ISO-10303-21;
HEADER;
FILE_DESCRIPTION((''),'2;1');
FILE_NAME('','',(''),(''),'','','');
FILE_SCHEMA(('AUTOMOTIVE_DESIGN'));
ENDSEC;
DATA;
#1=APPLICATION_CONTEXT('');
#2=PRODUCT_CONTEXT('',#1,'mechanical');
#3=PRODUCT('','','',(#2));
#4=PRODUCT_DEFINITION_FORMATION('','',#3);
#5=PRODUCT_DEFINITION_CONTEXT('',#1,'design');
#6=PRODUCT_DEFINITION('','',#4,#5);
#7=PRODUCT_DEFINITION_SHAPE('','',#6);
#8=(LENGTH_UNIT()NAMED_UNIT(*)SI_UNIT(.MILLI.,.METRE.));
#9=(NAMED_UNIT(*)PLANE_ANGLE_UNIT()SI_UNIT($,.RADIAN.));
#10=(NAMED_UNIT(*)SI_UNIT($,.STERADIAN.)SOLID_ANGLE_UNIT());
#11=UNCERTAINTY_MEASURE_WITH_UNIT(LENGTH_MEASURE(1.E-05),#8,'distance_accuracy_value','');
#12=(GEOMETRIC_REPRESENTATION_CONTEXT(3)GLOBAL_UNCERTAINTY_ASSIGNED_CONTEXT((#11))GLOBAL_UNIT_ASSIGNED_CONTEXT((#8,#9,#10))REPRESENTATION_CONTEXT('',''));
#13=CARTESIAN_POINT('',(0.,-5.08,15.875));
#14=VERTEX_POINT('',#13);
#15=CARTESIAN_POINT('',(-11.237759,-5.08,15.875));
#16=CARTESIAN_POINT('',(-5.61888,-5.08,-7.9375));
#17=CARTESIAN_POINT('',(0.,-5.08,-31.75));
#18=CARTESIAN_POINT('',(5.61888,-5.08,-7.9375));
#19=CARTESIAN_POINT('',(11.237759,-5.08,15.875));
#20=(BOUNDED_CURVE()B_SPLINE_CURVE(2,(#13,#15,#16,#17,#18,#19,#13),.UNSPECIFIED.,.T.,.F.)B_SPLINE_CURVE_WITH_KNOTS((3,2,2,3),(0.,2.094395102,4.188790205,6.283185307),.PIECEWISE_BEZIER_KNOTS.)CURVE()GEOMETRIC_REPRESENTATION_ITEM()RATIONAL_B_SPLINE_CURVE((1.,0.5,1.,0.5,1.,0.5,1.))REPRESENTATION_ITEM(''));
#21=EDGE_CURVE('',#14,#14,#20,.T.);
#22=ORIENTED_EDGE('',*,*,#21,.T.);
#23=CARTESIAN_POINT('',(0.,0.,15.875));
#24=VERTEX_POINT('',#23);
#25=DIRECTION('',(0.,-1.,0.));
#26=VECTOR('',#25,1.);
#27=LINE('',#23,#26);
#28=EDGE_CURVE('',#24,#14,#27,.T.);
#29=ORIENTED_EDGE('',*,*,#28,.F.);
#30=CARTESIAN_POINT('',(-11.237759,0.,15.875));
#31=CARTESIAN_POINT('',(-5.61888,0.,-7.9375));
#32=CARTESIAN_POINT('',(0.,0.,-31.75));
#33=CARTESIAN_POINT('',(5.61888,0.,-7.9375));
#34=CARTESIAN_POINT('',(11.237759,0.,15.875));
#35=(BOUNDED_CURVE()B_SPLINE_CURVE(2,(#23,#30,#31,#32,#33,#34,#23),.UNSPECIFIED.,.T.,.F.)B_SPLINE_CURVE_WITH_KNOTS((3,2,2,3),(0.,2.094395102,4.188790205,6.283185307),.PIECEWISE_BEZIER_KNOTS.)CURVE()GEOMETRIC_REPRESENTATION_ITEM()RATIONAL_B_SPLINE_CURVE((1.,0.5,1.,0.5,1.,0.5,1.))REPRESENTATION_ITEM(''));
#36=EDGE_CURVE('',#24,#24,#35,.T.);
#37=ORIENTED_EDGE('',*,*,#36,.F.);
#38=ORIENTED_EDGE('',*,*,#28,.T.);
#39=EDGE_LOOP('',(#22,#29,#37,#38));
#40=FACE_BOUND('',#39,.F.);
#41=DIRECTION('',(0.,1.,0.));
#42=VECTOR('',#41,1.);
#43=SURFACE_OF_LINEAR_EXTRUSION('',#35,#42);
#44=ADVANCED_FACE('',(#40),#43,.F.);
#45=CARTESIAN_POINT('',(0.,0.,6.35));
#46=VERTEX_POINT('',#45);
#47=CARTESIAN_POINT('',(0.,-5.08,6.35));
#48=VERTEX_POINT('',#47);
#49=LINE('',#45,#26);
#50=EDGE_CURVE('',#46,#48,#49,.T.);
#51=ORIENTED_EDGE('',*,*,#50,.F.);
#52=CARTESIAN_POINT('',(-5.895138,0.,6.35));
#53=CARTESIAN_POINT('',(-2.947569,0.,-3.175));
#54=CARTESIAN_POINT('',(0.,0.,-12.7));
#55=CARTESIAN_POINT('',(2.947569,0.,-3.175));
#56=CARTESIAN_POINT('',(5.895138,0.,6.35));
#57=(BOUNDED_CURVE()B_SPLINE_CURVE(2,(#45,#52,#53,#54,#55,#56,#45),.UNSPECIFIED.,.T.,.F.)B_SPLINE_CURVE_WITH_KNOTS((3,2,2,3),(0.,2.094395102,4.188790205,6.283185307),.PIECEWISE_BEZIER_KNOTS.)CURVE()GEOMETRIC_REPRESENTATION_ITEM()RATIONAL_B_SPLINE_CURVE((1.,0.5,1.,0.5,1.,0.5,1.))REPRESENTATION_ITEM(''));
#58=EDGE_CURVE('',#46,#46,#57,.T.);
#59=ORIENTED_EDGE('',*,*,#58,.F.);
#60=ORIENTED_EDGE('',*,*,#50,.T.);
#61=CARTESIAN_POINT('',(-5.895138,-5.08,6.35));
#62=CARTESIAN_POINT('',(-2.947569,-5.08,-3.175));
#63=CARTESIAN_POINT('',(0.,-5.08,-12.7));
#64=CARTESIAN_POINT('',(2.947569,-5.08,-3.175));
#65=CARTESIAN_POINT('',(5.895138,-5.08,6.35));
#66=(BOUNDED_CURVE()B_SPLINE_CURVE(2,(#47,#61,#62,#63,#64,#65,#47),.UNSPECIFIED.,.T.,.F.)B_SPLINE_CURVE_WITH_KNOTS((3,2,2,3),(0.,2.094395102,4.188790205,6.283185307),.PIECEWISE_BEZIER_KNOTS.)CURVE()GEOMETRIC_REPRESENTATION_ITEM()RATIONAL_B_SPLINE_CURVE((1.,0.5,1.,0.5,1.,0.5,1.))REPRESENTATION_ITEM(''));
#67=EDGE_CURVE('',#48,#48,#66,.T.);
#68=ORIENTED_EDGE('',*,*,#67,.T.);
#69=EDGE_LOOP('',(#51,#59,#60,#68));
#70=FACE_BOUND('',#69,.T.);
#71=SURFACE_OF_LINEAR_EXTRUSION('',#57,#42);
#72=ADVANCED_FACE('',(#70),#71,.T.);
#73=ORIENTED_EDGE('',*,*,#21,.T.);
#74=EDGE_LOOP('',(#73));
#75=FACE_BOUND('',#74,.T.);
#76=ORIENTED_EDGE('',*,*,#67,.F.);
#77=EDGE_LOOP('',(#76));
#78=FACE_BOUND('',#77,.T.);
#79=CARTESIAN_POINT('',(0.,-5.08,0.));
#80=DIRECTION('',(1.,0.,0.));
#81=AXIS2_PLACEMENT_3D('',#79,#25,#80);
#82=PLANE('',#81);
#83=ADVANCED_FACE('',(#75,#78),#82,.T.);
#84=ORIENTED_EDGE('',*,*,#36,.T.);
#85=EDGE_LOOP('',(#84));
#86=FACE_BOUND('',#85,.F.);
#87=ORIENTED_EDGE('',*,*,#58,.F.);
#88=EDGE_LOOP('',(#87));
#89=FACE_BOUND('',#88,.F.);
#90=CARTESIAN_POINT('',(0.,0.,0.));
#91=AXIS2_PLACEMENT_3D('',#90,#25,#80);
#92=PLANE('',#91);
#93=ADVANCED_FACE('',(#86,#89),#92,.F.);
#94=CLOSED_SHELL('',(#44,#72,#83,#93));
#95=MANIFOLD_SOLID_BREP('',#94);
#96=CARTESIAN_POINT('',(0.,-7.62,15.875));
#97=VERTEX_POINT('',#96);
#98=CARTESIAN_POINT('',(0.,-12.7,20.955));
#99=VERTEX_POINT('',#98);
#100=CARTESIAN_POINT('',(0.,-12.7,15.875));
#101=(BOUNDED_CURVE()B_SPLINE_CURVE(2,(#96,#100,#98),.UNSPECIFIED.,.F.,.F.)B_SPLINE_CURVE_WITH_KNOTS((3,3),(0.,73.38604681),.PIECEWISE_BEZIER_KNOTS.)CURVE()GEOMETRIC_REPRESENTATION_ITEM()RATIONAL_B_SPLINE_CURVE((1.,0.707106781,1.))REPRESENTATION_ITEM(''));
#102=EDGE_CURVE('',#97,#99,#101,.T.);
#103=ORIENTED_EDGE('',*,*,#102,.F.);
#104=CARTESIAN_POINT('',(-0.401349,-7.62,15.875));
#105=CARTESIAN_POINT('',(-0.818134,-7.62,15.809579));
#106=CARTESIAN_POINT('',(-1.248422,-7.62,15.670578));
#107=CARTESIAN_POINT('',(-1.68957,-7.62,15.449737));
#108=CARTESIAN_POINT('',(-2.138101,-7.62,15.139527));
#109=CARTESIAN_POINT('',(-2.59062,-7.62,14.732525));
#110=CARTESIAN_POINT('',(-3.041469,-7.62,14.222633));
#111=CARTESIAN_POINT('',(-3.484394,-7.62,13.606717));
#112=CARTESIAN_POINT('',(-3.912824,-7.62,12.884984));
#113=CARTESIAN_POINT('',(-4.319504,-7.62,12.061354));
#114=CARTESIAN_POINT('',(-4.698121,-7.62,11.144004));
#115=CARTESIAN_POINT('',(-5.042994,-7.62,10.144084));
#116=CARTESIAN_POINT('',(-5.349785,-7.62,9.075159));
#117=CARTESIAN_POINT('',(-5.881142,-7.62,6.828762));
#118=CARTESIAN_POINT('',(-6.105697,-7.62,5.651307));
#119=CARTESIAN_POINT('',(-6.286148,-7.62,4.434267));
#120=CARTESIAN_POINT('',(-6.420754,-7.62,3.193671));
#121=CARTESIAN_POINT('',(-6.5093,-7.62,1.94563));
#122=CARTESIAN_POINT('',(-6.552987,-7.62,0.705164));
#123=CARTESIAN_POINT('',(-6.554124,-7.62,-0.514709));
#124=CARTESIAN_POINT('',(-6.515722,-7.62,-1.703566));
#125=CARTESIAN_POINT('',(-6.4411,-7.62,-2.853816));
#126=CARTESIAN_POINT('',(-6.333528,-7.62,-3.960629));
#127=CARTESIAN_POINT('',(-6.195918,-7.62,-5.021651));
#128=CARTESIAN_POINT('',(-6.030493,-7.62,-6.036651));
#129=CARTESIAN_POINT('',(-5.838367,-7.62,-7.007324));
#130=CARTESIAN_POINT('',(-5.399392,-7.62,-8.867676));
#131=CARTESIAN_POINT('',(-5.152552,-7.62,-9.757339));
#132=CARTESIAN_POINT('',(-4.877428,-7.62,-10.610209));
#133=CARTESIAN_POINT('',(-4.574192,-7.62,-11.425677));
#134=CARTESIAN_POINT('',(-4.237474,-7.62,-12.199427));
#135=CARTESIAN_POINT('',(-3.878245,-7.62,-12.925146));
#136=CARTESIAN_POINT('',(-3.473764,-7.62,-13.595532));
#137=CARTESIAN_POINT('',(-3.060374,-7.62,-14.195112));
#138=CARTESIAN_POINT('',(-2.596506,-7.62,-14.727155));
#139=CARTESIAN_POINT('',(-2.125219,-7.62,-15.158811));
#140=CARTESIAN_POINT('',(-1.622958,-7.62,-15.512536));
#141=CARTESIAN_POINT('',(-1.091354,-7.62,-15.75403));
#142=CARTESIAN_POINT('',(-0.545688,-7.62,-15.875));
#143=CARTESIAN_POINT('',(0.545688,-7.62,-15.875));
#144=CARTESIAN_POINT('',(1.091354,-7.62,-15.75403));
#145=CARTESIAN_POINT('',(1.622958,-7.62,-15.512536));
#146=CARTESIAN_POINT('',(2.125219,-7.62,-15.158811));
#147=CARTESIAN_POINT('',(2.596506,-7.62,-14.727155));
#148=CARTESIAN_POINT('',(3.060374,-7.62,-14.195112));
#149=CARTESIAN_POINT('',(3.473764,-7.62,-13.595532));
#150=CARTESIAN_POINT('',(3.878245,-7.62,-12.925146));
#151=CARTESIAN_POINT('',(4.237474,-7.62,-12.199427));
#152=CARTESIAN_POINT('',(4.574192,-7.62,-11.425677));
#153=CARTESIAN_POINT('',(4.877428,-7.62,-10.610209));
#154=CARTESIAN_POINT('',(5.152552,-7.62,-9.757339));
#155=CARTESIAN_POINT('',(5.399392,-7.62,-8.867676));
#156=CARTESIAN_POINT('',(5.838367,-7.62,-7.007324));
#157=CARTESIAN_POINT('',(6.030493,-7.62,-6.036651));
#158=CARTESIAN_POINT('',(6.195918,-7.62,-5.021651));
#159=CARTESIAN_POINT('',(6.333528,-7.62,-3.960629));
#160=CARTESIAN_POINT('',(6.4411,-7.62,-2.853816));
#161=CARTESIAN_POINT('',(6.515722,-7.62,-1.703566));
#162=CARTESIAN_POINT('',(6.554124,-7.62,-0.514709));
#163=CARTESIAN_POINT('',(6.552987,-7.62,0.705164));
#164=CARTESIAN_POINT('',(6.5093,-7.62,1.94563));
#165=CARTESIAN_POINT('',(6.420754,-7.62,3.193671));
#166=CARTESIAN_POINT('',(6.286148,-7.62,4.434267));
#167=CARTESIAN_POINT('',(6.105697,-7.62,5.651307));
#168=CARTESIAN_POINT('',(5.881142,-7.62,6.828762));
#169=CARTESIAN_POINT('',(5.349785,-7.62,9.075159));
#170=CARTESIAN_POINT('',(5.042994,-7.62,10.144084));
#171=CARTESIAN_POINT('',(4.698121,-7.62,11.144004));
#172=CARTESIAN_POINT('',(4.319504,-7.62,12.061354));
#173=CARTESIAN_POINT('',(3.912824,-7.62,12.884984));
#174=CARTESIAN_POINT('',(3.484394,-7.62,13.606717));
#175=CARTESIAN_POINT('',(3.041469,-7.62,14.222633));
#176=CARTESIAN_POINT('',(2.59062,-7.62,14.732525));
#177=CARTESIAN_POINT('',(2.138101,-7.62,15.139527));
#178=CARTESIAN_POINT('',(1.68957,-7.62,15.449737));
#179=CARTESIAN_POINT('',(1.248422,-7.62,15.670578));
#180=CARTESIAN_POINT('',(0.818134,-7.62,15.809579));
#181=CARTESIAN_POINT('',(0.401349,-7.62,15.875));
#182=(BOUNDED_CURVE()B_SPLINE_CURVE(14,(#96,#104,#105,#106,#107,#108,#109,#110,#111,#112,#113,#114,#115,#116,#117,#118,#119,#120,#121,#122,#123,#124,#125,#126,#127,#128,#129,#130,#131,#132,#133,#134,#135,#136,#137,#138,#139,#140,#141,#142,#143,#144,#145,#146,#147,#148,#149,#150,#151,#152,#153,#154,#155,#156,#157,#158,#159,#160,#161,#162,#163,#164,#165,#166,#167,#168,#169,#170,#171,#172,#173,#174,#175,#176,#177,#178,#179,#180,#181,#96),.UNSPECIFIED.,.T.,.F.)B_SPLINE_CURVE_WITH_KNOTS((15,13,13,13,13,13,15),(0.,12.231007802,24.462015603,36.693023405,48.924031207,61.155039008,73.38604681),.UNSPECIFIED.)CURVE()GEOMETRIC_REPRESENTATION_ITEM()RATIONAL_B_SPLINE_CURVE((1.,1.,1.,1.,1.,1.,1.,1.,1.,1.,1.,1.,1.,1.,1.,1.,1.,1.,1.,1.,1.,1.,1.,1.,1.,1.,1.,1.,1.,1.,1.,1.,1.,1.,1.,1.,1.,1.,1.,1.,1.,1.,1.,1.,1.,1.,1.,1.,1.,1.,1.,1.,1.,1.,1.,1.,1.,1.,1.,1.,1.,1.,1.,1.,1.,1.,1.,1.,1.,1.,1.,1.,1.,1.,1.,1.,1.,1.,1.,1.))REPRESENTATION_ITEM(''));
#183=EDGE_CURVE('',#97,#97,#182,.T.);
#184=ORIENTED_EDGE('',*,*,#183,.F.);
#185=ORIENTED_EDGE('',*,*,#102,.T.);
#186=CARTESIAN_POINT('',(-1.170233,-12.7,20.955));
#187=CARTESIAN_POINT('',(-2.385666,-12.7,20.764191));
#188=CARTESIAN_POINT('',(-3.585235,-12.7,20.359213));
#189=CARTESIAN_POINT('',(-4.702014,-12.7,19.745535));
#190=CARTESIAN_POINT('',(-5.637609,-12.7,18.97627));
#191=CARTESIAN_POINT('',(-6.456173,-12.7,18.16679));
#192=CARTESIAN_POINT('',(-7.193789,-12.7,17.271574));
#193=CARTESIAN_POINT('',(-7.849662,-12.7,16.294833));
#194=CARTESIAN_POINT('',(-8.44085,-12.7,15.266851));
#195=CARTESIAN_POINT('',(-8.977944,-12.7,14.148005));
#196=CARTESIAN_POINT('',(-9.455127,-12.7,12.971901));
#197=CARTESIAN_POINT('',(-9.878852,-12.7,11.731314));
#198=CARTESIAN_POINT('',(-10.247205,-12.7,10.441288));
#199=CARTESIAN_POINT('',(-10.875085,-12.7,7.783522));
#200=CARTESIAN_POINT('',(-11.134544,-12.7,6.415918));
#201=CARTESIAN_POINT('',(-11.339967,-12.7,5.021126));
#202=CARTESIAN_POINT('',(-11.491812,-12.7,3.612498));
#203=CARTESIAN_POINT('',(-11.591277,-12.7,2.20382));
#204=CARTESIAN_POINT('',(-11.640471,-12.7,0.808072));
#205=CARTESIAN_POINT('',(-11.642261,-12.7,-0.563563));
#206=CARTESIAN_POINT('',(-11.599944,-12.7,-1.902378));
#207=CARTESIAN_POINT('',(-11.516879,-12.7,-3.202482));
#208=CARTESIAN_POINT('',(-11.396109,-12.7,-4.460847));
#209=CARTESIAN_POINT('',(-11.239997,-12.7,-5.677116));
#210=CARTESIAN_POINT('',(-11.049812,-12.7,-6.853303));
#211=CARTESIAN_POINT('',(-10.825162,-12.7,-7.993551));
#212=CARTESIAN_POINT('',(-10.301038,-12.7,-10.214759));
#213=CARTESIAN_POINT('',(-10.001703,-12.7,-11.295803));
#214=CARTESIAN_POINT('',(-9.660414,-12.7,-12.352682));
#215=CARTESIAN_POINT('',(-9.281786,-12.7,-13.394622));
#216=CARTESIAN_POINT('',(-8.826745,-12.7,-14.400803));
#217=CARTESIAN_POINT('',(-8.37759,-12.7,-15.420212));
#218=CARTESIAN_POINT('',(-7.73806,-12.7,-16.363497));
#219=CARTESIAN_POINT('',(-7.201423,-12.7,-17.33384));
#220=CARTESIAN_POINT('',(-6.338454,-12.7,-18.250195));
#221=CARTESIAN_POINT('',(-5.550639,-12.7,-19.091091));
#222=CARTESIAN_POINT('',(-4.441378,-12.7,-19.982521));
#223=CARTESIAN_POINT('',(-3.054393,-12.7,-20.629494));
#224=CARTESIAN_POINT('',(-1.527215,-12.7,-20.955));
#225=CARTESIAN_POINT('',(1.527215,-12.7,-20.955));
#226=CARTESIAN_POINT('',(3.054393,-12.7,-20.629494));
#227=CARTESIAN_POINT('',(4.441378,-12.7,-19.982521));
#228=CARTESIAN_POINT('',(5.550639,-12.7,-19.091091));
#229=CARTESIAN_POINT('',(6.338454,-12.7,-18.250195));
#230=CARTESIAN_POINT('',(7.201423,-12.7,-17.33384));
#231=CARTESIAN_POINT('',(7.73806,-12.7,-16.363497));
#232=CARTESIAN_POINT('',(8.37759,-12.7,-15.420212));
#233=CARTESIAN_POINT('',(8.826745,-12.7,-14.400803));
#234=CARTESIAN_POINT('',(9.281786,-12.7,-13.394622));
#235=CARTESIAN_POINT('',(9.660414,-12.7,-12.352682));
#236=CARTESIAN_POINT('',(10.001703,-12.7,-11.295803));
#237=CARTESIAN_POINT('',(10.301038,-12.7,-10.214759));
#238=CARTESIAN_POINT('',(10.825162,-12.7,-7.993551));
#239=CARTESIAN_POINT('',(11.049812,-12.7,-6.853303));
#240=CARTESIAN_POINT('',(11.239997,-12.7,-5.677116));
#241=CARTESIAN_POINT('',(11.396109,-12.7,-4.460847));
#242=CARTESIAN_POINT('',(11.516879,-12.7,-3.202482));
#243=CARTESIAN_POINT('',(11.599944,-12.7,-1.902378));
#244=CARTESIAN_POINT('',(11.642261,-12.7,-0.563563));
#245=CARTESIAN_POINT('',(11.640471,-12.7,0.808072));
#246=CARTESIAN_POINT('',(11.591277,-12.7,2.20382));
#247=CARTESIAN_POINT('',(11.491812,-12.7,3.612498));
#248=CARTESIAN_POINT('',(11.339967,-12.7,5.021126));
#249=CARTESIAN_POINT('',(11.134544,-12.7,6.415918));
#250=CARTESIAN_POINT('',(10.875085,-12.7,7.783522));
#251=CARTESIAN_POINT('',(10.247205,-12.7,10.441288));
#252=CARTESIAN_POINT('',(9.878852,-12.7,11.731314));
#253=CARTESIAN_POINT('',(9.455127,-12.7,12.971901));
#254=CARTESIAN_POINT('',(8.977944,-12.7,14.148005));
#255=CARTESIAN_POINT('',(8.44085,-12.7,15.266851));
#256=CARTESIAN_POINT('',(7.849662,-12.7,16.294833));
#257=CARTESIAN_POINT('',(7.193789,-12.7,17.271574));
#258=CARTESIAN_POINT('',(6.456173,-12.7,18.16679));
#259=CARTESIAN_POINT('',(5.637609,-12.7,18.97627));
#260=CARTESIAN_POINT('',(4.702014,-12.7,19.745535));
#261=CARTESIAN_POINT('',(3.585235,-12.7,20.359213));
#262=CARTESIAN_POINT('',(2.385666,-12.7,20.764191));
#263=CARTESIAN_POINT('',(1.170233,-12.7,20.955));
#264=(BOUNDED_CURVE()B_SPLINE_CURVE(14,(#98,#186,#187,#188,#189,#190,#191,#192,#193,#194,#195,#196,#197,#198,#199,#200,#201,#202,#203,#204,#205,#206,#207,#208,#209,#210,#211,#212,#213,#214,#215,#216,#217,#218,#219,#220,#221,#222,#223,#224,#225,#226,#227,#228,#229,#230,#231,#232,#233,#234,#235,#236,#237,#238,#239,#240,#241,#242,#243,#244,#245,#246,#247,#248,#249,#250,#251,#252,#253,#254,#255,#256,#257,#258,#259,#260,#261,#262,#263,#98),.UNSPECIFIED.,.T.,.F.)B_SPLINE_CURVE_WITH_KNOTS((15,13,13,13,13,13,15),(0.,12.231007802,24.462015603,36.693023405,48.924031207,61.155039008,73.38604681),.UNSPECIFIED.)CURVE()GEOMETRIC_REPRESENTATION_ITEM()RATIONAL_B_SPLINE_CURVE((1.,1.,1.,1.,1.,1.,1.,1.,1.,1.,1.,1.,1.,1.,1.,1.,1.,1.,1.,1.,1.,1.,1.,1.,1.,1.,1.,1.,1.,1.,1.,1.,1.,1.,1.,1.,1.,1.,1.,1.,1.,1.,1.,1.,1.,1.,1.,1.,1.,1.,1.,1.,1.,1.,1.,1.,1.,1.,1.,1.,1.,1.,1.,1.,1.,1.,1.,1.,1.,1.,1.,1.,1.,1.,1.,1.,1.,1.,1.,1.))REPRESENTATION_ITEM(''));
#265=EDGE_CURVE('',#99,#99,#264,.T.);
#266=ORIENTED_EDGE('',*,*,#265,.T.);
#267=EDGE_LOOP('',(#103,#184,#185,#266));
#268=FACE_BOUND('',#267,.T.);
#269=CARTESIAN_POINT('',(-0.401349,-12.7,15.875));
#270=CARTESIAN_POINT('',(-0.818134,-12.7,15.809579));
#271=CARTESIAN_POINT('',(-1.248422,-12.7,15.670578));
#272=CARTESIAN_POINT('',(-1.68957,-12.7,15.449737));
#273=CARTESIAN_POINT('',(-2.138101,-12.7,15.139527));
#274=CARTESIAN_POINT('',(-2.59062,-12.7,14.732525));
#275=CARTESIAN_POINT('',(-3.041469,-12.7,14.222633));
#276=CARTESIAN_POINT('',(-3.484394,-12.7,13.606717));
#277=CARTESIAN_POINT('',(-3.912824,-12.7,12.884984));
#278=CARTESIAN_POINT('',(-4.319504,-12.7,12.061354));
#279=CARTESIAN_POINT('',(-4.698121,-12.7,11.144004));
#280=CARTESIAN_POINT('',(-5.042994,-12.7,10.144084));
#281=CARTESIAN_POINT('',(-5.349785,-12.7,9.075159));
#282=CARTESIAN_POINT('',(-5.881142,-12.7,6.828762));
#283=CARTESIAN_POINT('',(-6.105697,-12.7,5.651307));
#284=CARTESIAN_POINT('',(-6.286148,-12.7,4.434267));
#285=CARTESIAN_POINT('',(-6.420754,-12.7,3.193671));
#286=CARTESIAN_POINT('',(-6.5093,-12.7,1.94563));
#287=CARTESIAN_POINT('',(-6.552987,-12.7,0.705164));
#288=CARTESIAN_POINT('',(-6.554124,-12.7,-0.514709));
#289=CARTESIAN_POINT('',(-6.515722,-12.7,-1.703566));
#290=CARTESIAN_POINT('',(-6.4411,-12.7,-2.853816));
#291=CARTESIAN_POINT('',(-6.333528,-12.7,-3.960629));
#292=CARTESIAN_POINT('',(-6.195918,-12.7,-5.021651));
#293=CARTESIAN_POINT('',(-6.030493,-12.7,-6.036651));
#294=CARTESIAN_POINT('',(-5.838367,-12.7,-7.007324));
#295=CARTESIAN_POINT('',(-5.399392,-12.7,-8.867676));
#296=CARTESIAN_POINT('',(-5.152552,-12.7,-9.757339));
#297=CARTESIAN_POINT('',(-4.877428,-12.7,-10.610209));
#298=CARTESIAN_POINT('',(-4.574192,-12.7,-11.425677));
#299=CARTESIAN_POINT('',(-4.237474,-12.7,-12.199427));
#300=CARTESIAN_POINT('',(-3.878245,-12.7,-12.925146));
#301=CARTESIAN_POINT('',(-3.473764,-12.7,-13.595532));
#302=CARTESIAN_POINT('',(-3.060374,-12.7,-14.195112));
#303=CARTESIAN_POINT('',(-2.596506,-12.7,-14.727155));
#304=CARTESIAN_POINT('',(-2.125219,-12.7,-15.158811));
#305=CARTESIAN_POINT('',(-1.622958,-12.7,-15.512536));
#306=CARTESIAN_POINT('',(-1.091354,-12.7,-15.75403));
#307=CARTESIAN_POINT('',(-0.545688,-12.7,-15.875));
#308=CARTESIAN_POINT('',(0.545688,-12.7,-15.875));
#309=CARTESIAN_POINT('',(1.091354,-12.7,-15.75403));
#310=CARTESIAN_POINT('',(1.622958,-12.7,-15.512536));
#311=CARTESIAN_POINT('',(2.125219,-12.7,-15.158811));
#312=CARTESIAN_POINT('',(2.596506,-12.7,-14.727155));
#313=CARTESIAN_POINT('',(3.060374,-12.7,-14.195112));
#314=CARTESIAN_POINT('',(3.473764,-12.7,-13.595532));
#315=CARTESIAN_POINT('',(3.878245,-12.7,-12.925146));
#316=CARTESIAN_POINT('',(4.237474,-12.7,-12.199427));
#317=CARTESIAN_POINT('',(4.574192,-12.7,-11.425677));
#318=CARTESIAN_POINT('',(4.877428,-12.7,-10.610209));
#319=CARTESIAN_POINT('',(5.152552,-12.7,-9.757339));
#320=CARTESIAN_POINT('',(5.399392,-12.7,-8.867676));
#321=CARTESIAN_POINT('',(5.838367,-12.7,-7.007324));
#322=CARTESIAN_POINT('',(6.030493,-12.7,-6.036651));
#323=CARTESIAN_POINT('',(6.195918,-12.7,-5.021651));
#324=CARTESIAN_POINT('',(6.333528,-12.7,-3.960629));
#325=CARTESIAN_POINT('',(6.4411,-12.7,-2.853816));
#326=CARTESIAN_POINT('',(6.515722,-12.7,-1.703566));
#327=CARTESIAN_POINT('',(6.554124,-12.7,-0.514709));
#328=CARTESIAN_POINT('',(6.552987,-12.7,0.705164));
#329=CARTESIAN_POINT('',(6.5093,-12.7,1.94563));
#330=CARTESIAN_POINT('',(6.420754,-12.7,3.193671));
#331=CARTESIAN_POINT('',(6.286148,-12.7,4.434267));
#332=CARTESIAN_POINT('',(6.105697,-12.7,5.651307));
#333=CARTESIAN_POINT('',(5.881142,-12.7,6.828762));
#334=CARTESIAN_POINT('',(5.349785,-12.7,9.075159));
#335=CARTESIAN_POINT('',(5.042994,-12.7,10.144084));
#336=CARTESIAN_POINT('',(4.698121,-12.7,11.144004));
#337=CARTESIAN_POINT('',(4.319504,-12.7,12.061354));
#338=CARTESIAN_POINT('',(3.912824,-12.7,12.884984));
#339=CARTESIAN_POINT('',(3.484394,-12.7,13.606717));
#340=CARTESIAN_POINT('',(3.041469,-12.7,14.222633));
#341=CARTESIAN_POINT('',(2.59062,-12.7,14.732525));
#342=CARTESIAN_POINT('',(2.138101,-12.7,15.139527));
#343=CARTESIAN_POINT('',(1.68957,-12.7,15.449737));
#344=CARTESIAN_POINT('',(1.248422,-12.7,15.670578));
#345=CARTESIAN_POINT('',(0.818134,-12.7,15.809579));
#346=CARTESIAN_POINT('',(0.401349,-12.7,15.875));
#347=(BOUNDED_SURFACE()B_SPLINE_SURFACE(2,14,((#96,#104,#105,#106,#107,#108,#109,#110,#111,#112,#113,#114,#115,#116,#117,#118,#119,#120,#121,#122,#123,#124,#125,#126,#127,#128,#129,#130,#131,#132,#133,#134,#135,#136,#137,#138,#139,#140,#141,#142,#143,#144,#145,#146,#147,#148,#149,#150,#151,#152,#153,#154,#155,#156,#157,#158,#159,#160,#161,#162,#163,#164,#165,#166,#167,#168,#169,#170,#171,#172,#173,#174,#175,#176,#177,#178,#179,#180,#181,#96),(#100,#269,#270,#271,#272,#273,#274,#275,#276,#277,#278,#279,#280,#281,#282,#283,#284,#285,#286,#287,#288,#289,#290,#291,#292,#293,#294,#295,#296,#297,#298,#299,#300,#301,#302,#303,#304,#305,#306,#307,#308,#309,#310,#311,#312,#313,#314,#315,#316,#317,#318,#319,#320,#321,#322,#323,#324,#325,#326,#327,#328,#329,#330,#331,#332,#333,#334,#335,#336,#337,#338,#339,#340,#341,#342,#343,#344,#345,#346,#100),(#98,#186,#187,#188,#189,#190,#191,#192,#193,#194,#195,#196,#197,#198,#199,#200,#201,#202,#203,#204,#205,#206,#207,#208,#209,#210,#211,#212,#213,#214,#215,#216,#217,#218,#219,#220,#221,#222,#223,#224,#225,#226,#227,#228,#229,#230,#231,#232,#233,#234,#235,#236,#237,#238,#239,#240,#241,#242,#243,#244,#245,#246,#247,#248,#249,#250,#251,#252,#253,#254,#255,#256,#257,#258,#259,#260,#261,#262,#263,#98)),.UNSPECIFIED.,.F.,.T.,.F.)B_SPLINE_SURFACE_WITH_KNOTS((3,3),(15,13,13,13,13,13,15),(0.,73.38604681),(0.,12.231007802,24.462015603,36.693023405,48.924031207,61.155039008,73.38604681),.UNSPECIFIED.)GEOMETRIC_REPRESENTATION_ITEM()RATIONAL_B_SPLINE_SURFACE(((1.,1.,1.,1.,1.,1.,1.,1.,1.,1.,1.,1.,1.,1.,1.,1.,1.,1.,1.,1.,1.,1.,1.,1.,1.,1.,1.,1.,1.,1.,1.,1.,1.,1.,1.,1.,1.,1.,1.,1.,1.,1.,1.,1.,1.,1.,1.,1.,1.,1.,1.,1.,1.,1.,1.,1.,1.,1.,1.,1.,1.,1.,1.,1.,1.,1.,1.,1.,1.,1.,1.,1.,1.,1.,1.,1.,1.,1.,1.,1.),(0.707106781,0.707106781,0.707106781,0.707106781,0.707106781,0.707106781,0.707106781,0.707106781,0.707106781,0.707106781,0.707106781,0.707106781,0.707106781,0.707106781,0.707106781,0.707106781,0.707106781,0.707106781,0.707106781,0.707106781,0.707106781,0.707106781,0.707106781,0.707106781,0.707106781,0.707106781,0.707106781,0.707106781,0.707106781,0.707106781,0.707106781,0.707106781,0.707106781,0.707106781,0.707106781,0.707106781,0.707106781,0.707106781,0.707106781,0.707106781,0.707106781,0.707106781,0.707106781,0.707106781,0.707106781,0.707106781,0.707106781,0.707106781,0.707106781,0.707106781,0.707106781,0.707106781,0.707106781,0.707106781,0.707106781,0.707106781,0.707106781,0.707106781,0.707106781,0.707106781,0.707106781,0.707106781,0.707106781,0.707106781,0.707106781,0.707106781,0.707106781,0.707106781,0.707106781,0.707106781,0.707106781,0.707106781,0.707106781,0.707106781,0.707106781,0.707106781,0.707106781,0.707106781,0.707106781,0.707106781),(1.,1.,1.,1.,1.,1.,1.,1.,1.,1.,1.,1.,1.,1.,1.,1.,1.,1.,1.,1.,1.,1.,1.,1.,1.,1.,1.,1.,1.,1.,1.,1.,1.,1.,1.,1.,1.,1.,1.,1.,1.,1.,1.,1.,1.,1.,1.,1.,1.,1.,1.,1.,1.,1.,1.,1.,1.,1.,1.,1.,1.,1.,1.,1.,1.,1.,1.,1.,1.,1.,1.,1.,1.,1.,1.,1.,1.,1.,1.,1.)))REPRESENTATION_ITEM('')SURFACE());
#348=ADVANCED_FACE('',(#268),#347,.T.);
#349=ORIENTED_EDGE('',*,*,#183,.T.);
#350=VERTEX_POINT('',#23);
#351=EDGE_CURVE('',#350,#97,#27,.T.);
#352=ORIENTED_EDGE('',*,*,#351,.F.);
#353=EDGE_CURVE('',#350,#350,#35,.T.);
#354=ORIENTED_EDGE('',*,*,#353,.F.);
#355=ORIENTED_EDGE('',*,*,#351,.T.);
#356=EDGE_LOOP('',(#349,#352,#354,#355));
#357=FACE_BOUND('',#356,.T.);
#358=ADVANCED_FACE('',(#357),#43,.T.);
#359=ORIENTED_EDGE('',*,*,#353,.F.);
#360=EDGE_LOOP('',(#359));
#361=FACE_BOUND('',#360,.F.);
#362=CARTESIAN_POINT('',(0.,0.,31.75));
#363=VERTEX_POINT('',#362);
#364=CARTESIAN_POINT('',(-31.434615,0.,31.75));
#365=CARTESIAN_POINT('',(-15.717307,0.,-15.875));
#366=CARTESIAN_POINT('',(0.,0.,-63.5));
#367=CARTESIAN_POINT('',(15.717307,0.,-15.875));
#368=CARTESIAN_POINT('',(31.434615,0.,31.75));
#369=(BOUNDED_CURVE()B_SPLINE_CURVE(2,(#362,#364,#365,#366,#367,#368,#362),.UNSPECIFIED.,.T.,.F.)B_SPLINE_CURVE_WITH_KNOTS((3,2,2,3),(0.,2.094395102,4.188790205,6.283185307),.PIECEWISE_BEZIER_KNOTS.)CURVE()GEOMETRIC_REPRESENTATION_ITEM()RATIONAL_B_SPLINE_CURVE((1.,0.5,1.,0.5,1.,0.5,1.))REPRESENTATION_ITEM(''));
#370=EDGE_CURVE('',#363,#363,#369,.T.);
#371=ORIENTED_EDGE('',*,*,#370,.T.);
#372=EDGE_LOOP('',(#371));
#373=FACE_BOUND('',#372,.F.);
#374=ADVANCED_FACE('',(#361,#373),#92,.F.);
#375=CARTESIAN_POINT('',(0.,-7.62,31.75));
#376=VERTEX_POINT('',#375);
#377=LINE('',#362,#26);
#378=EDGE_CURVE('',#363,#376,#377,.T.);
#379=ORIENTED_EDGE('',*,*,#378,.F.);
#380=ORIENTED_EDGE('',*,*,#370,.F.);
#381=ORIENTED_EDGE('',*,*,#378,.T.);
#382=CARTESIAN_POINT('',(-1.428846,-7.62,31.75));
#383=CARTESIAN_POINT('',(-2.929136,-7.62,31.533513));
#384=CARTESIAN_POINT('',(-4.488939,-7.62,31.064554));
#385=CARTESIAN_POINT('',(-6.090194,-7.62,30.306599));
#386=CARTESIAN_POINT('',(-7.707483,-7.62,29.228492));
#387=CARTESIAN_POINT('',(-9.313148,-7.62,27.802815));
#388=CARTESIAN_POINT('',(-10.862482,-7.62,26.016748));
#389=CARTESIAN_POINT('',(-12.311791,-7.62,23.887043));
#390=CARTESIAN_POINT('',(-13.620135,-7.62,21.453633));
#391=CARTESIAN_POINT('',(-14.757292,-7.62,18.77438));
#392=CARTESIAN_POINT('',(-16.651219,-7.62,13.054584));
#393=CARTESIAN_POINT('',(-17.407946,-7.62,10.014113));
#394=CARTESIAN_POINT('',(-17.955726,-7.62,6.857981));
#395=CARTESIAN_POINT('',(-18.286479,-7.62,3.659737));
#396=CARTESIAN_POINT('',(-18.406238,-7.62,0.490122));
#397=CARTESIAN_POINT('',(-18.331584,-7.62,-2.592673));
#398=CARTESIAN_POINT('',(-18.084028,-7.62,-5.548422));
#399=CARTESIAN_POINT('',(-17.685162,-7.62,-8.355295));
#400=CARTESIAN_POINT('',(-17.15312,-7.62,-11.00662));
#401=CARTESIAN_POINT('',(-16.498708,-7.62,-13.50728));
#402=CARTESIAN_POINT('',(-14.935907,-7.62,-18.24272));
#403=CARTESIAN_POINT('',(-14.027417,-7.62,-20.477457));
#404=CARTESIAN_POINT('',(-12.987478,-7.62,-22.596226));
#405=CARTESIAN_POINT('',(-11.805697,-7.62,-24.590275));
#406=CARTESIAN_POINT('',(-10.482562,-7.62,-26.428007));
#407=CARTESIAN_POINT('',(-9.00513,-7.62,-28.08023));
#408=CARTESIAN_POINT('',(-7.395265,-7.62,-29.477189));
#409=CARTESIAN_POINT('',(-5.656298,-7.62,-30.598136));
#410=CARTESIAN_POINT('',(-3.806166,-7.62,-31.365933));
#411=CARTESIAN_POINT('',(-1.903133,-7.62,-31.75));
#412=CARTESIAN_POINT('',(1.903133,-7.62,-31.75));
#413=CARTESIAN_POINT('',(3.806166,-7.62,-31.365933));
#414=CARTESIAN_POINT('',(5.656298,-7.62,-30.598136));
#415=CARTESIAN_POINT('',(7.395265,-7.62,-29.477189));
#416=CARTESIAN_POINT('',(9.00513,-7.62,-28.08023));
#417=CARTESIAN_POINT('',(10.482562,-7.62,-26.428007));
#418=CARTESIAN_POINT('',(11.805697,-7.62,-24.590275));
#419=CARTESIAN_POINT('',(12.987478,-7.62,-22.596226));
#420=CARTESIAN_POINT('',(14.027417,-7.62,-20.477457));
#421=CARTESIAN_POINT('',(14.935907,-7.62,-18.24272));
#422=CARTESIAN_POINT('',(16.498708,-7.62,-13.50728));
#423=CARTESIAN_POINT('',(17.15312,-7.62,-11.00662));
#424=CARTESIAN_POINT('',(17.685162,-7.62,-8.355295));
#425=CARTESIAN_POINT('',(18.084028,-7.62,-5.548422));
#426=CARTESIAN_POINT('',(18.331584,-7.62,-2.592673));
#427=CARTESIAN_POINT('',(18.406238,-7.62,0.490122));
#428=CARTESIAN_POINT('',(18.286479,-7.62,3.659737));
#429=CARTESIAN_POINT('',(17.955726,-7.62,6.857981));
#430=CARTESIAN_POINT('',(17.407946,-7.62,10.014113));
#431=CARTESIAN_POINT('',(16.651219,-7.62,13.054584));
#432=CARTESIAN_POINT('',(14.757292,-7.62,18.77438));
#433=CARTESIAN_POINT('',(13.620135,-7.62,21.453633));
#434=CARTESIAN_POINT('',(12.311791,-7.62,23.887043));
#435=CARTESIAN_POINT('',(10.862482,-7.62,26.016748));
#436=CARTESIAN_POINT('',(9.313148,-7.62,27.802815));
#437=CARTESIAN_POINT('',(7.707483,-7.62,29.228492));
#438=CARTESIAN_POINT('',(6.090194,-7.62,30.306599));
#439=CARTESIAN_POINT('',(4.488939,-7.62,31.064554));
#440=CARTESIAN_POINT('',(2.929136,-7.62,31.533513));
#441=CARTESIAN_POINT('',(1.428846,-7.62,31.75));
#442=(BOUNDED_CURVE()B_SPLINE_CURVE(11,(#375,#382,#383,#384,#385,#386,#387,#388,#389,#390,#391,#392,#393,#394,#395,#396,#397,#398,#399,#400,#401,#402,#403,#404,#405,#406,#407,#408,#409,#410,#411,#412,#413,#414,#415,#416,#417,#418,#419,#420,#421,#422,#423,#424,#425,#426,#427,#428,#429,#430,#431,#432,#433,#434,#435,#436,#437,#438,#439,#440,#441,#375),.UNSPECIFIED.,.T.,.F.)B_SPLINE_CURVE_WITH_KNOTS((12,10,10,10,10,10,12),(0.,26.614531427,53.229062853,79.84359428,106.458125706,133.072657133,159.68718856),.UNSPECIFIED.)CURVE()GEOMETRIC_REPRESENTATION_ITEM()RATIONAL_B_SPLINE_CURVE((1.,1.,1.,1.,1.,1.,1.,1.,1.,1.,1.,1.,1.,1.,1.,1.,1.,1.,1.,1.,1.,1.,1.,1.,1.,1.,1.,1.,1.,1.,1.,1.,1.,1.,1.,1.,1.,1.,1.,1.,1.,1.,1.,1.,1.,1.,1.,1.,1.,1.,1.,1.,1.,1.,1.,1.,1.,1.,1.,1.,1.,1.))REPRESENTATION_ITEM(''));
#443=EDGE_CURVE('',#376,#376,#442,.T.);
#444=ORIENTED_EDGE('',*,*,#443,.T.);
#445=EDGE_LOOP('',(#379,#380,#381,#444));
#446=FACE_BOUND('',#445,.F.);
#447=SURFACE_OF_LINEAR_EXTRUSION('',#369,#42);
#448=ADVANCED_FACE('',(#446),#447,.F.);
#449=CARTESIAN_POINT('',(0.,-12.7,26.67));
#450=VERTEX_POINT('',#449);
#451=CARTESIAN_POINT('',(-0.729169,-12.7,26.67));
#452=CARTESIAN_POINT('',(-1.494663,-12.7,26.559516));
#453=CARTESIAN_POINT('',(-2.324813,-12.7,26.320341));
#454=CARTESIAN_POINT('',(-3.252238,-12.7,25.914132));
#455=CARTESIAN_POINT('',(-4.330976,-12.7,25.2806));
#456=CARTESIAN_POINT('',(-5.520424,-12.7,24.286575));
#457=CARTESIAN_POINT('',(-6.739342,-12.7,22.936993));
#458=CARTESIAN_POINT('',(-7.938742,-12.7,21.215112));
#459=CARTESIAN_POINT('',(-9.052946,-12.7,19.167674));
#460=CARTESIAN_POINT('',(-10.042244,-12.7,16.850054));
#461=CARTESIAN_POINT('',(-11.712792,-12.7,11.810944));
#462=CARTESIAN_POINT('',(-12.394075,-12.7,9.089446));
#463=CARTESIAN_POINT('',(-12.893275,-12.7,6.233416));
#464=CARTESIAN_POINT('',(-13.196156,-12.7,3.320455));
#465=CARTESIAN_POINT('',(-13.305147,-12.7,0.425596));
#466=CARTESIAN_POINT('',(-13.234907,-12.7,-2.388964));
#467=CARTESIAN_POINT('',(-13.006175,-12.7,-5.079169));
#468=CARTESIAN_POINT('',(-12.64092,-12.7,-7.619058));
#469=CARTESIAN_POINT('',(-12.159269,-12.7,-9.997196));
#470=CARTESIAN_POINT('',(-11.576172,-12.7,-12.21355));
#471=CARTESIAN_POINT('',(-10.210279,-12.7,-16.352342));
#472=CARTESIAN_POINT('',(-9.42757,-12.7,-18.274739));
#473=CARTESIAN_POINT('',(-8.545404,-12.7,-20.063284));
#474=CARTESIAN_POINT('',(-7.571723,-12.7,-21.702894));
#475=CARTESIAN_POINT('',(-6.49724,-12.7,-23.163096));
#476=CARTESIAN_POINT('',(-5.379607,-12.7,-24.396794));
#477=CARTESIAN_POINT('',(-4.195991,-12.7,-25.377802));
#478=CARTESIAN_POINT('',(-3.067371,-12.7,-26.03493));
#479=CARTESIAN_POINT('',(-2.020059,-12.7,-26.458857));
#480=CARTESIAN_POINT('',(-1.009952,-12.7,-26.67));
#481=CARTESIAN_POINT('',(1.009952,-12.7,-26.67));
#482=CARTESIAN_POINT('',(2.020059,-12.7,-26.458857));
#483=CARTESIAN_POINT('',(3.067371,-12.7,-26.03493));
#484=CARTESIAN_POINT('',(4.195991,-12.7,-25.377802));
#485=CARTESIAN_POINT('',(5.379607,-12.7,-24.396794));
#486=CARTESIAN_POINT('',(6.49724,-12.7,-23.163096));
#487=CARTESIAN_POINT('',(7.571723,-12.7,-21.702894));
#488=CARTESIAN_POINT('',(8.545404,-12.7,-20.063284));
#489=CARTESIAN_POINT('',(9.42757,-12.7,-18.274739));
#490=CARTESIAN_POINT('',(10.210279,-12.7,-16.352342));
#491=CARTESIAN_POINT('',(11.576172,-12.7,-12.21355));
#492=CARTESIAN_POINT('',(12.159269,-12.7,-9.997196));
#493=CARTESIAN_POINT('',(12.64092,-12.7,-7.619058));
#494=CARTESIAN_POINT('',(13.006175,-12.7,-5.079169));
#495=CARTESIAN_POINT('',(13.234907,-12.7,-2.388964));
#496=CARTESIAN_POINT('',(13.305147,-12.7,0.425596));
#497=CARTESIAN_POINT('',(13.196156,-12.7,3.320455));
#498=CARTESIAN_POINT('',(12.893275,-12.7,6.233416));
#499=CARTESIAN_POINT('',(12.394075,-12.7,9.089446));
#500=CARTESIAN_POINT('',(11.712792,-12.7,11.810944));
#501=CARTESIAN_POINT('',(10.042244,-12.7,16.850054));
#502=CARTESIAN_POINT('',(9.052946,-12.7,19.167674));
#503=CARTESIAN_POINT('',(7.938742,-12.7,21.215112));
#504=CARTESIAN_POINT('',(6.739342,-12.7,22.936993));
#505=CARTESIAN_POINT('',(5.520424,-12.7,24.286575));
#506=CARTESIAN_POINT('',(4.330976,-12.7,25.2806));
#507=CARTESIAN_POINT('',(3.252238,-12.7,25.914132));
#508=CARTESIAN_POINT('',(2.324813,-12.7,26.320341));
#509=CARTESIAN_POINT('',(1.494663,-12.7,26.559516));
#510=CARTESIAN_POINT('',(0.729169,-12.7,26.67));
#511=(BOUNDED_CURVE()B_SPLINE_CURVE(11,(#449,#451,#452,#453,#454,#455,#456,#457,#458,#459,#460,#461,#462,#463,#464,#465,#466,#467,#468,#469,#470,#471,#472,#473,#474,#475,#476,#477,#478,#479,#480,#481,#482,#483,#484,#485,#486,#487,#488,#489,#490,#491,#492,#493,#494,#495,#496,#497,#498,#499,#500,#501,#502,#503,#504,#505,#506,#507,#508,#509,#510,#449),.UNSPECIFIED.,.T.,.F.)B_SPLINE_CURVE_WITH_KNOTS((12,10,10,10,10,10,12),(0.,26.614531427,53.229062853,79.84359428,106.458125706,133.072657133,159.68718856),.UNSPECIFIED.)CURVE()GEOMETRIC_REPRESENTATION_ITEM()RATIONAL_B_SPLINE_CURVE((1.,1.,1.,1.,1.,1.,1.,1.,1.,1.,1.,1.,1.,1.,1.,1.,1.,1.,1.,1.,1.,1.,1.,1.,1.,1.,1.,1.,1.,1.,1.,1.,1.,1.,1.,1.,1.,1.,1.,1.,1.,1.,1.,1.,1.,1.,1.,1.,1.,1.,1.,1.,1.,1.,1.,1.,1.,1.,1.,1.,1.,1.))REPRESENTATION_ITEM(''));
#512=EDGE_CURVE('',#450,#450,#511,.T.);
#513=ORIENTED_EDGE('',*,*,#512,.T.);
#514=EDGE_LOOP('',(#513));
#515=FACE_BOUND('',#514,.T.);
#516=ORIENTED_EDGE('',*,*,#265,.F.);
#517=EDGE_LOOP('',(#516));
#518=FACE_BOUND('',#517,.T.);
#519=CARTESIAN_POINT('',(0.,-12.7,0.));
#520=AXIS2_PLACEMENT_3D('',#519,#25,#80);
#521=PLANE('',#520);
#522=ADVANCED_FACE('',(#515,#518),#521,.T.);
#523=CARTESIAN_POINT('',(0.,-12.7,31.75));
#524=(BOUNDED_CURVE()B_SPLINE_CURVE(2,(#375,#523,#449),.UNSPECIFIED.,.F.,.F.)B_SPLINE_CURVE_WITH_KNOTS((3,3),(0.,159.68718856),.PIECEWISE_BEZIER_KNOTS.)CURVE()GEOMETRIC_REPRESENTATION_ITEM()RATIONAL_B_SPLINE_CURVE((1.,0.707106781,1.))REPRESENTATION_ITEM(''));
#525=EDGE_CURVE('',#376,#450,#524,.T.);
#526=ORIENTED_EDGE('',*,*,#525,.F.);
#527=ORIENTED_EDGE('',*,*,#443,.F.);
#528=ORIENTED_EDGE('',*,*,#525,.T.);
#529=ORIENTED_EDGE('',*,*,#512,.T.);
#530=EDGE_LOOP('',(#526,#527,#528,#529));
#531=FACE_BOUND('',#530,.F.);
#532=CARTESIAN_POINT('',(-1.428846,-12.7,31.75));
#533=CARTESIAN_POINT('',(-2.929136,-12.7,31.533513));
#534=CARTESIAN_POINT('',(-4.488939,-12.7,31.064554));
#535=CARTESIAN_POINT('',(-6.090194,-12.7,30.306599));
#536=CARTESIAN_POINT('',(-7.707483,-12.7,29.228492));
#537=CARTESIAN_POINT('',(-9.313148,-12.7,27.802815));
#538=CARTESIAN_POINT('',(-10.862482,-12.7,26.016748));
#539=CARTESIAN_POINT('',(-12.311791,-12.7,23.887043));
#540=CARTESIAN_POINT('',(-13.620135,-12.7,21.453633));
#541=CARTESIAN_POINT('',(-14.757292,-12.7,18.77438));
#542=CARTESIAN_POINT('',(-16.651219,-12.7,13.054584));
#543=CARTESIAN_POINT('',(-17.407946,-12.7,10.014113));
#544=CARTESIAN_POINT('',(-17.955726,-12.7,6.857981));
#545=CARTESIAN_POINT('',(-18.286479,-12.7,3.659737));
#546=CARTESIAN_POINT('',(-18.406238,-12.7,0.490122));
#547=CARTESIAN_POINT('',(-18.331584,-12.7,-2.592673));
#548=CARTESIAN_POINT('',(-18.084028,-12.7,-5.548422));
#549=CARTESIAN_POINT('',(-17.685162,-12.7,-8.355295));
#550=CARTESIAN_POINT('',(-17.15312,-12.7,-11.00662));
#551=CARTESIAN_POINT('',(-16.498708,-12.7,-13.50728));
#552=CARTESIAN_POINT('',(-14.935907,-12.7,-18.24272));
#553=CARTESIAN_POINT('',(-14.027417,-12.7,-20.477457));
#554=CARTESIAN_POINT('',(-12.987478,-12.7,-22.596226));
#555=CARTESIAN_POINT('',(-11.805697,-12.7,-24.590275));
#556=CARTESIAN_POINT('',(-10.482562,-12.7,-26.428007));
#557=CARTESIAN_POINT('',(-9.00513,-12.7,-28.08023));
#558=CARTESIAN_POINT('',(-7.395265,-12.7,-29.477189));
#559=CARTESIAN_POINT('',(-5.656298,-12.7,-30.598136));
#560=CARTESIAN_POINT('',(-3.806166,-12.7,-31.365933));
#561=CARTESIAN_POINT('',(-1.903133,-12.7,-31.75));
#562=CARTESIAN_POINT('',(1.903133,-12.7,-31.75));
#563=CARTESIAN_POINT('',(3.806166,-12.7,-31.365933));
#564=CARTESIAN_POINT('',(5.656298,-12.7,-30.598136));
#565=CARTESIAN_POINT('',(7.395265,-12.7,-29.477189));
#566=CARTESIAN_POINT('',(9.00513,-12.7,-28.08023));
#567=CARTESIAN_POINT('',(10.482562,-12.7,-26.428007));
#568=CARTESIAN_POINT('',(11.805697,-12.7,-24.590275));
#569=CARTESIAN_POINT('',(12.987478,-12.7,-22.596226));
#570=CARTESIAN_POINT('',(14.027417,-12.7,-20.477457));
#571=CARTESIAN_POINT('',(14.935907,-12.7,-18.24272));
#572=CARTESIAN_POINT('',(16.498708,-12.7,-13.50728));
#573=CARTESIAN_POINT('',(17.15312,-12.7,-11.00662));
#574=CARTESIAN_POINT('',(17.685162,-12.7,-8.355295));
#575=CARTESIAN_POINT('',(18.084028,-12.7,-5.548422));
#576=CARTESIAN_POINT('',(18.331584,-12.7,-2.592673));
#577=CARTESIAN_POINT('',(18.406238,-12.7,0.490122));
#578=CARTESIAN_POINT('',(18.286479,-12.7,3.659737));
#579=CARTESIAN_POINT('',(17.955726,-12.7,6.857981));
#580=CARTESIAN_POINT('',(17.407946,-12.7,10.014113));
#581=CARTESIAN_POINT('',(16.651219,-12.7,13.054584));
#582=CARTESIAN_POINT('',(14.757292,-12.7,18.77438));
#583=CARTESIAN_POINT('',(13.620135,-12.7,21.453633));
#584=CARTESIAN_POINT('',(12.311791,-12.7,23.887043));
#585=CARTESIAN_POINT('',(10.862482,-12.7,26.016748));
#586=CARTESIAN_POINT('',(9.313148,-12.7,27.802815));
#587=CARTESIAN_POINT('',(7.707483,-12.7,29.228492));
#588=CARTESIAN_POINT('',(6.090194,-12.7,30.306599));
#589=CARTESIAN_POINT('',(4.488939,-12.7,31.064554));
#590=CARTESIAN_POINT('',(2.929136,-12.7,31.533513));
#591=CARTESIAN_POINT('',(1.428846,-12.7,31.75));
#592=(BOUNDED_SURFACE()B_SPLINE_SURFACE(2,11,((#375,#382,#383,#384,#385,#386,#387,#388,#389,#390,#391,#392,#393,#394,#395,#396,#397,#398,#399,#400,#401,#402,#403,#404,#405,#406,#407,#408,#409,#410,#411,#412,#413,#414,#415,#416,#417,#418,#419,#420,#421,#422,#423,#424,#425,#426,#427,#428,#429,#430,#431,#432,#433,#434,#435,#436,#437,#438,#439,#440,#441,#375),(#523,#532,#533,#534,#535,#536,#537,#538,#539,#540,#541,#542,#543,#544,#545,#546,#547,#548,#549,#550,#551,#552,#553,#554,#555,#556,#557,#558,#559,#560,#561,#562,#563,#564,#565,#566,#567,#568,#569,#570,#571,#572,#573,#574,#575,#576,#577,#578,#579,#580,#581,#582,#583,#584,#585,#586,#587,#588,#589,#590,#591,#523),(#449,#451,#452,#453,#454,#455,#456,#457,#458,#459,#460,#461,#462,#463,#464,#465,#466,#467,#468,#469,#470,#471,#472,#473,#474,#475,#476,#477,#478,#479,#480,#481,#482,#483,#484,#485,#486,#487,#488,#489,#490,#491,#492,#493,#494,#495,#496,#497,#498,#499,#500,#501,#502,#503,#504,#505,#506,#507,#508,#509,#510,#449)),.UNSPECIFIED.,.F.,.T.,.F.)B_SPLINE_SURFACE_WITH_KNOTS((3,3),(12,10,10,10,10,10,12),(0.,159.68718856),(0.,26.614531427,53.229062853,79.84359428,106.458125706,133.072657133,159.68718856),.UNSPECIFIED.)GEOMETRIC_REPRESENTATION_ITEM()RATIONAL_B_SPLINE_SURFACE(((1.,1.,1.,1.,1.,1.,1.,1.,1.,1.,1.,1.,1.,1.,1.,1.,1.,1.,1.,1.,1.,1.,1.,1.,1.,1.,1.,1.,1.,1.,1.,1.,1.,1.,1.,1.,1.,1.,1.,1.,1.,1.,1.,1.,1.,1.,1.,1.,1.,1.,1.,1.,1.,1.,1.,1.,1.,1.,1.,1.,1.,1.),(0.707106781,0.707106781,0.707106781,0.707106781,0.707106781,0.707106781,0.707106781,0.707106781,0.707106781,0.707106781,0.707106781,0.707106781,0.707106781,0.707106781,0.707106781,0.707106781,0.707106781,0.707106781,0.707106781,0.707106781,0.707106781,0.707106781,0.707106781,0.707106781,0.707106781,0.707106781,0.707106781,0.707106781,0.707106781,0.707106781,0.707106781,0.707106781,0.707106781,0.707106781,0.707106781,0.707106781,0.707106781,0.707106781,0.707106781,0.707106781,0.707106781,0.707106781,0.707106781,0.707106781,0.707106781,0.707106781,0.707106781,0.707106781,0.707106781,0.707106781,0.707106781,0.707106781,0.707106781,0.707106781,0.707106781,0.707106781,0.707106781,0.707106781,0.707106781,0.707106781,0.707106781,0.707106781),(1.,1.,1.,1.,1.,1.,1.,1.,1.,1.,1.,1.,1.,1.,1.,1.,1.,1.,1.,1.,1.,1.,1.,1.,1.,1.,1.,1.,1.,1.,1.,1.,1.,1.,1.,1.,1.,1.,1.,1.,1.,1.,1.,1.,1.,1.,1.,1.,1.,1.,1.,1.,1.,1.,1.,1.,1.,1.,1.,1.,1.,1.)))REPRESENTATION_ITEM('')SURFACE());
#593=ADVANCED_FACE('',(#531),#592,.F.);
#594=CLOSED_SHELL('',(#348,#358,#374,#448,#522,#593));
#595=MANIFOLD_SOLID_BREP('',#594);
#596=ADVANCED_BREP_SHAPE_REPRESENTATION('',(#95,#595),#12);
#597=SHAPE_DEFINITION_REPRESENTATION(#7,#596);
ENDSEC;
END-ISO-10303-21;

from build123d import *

# Parameters (mm, degrees)
F1_DEPTH = 12.7
F2_DEPTH = 5.08
F3_R     = 5.08


with BuildPart() as f1:
    # F0 (on Front) → F1 (new body)
    with BuildSketch(Plane.XZ):
        with BuildLine():
            add(Edge.make_bspline(
                [(0, 31.75), (-31.4346147509, 31.75), (-15.7173073754, -15.875), (0, -63.5), (15.7173073754, -15.875), (31.4346147509, 31.75), (0, 31.75)],
                knots=[0, 0, 0, 2.0943951024, 2.0943951024, 4.1887902048, 4.1887902048, 6.2831853072, 6.2831853072, 6.2831853072], degree=2, weights=[1, 0.5, 1, 0.5, 1, 0.5, 1]))
        make_face()
        with BuildLine():
            add(Edge.make_bspline(
                [(0, 15.875), (-11.2377592119, 15.875), (-5.6188796059, -7.9375), (0, -31.75), (5.6188796059, -7.9375), (11.2377592119, 15.875), (0, 15.875)],
                knots=[0, 0, 0, 2.0943951024, 2.0943951024, 4.1887902048, 4.1887902048, 6.2831853072, 6.2831853072, 6.2831853072], degree=2, weights=[1, 0.5, 1, 0.5, 1, 0.5, 1]))
        make_face(mode=Mode.SUBTRACT)
    extrude(amount=F1_DEPTH)

    # F3
    f3_edges = [f1.edges().sort_by_distance(p)[0] for p in [
        (-1e-06, -12.7, -31.75),
        (-1.7e-05, -12.7, -15.875),
    ]]
    fillet(f3_edges, radius=F3_R)


with BuildPart() as f2:
    # F0 (on Front) → F2 (new body)
    with BuildSketch(Plane.XZ):
        with BuildLine():
            add(Edge.make_bspline(
                [(0, 15.875), (-11.2377592119, 15.875), (-5.6188796059, -7.9375), (0, -31.75), (5.6188796059, -7.9375), (11.2377592119, 15.875), (0, 15.875)],
                knots=[0, 0, 0, 2.0943951024, 2.0943951024, 4.1887902048, 4.1887902048, 6.2831853072, 6.2831853072, 6.2831853072], degree=2, weights=[1, 0.5, 1, 0.5, 1, 0.5, 1]))
        make_face()
        with BuildLine():
            add(Edge.make_bspline(
                [(0, 6.35), (-5.8951377227, 6.35), (-2.9475688614, -3.175), (0, -12.7), (2.9475688614, -3.175), (5.8951377227, 6.35), (0, 6.35)],
                knots=[0, 0, 0, 2.0943951024, 2.0943951024, 4.1887902048, 4.1887902048, 6.2831853072, 6.2831853072, 6.2831853072], degree=2, weights=[1, 0.5, 1, 0.5, 1, 0.5, 1]))
        make_face(mode=Mode.SUBTRACT)
    extrude(amount=F2_DEPTH)


solid = Compound([f1.part, f2.part])
